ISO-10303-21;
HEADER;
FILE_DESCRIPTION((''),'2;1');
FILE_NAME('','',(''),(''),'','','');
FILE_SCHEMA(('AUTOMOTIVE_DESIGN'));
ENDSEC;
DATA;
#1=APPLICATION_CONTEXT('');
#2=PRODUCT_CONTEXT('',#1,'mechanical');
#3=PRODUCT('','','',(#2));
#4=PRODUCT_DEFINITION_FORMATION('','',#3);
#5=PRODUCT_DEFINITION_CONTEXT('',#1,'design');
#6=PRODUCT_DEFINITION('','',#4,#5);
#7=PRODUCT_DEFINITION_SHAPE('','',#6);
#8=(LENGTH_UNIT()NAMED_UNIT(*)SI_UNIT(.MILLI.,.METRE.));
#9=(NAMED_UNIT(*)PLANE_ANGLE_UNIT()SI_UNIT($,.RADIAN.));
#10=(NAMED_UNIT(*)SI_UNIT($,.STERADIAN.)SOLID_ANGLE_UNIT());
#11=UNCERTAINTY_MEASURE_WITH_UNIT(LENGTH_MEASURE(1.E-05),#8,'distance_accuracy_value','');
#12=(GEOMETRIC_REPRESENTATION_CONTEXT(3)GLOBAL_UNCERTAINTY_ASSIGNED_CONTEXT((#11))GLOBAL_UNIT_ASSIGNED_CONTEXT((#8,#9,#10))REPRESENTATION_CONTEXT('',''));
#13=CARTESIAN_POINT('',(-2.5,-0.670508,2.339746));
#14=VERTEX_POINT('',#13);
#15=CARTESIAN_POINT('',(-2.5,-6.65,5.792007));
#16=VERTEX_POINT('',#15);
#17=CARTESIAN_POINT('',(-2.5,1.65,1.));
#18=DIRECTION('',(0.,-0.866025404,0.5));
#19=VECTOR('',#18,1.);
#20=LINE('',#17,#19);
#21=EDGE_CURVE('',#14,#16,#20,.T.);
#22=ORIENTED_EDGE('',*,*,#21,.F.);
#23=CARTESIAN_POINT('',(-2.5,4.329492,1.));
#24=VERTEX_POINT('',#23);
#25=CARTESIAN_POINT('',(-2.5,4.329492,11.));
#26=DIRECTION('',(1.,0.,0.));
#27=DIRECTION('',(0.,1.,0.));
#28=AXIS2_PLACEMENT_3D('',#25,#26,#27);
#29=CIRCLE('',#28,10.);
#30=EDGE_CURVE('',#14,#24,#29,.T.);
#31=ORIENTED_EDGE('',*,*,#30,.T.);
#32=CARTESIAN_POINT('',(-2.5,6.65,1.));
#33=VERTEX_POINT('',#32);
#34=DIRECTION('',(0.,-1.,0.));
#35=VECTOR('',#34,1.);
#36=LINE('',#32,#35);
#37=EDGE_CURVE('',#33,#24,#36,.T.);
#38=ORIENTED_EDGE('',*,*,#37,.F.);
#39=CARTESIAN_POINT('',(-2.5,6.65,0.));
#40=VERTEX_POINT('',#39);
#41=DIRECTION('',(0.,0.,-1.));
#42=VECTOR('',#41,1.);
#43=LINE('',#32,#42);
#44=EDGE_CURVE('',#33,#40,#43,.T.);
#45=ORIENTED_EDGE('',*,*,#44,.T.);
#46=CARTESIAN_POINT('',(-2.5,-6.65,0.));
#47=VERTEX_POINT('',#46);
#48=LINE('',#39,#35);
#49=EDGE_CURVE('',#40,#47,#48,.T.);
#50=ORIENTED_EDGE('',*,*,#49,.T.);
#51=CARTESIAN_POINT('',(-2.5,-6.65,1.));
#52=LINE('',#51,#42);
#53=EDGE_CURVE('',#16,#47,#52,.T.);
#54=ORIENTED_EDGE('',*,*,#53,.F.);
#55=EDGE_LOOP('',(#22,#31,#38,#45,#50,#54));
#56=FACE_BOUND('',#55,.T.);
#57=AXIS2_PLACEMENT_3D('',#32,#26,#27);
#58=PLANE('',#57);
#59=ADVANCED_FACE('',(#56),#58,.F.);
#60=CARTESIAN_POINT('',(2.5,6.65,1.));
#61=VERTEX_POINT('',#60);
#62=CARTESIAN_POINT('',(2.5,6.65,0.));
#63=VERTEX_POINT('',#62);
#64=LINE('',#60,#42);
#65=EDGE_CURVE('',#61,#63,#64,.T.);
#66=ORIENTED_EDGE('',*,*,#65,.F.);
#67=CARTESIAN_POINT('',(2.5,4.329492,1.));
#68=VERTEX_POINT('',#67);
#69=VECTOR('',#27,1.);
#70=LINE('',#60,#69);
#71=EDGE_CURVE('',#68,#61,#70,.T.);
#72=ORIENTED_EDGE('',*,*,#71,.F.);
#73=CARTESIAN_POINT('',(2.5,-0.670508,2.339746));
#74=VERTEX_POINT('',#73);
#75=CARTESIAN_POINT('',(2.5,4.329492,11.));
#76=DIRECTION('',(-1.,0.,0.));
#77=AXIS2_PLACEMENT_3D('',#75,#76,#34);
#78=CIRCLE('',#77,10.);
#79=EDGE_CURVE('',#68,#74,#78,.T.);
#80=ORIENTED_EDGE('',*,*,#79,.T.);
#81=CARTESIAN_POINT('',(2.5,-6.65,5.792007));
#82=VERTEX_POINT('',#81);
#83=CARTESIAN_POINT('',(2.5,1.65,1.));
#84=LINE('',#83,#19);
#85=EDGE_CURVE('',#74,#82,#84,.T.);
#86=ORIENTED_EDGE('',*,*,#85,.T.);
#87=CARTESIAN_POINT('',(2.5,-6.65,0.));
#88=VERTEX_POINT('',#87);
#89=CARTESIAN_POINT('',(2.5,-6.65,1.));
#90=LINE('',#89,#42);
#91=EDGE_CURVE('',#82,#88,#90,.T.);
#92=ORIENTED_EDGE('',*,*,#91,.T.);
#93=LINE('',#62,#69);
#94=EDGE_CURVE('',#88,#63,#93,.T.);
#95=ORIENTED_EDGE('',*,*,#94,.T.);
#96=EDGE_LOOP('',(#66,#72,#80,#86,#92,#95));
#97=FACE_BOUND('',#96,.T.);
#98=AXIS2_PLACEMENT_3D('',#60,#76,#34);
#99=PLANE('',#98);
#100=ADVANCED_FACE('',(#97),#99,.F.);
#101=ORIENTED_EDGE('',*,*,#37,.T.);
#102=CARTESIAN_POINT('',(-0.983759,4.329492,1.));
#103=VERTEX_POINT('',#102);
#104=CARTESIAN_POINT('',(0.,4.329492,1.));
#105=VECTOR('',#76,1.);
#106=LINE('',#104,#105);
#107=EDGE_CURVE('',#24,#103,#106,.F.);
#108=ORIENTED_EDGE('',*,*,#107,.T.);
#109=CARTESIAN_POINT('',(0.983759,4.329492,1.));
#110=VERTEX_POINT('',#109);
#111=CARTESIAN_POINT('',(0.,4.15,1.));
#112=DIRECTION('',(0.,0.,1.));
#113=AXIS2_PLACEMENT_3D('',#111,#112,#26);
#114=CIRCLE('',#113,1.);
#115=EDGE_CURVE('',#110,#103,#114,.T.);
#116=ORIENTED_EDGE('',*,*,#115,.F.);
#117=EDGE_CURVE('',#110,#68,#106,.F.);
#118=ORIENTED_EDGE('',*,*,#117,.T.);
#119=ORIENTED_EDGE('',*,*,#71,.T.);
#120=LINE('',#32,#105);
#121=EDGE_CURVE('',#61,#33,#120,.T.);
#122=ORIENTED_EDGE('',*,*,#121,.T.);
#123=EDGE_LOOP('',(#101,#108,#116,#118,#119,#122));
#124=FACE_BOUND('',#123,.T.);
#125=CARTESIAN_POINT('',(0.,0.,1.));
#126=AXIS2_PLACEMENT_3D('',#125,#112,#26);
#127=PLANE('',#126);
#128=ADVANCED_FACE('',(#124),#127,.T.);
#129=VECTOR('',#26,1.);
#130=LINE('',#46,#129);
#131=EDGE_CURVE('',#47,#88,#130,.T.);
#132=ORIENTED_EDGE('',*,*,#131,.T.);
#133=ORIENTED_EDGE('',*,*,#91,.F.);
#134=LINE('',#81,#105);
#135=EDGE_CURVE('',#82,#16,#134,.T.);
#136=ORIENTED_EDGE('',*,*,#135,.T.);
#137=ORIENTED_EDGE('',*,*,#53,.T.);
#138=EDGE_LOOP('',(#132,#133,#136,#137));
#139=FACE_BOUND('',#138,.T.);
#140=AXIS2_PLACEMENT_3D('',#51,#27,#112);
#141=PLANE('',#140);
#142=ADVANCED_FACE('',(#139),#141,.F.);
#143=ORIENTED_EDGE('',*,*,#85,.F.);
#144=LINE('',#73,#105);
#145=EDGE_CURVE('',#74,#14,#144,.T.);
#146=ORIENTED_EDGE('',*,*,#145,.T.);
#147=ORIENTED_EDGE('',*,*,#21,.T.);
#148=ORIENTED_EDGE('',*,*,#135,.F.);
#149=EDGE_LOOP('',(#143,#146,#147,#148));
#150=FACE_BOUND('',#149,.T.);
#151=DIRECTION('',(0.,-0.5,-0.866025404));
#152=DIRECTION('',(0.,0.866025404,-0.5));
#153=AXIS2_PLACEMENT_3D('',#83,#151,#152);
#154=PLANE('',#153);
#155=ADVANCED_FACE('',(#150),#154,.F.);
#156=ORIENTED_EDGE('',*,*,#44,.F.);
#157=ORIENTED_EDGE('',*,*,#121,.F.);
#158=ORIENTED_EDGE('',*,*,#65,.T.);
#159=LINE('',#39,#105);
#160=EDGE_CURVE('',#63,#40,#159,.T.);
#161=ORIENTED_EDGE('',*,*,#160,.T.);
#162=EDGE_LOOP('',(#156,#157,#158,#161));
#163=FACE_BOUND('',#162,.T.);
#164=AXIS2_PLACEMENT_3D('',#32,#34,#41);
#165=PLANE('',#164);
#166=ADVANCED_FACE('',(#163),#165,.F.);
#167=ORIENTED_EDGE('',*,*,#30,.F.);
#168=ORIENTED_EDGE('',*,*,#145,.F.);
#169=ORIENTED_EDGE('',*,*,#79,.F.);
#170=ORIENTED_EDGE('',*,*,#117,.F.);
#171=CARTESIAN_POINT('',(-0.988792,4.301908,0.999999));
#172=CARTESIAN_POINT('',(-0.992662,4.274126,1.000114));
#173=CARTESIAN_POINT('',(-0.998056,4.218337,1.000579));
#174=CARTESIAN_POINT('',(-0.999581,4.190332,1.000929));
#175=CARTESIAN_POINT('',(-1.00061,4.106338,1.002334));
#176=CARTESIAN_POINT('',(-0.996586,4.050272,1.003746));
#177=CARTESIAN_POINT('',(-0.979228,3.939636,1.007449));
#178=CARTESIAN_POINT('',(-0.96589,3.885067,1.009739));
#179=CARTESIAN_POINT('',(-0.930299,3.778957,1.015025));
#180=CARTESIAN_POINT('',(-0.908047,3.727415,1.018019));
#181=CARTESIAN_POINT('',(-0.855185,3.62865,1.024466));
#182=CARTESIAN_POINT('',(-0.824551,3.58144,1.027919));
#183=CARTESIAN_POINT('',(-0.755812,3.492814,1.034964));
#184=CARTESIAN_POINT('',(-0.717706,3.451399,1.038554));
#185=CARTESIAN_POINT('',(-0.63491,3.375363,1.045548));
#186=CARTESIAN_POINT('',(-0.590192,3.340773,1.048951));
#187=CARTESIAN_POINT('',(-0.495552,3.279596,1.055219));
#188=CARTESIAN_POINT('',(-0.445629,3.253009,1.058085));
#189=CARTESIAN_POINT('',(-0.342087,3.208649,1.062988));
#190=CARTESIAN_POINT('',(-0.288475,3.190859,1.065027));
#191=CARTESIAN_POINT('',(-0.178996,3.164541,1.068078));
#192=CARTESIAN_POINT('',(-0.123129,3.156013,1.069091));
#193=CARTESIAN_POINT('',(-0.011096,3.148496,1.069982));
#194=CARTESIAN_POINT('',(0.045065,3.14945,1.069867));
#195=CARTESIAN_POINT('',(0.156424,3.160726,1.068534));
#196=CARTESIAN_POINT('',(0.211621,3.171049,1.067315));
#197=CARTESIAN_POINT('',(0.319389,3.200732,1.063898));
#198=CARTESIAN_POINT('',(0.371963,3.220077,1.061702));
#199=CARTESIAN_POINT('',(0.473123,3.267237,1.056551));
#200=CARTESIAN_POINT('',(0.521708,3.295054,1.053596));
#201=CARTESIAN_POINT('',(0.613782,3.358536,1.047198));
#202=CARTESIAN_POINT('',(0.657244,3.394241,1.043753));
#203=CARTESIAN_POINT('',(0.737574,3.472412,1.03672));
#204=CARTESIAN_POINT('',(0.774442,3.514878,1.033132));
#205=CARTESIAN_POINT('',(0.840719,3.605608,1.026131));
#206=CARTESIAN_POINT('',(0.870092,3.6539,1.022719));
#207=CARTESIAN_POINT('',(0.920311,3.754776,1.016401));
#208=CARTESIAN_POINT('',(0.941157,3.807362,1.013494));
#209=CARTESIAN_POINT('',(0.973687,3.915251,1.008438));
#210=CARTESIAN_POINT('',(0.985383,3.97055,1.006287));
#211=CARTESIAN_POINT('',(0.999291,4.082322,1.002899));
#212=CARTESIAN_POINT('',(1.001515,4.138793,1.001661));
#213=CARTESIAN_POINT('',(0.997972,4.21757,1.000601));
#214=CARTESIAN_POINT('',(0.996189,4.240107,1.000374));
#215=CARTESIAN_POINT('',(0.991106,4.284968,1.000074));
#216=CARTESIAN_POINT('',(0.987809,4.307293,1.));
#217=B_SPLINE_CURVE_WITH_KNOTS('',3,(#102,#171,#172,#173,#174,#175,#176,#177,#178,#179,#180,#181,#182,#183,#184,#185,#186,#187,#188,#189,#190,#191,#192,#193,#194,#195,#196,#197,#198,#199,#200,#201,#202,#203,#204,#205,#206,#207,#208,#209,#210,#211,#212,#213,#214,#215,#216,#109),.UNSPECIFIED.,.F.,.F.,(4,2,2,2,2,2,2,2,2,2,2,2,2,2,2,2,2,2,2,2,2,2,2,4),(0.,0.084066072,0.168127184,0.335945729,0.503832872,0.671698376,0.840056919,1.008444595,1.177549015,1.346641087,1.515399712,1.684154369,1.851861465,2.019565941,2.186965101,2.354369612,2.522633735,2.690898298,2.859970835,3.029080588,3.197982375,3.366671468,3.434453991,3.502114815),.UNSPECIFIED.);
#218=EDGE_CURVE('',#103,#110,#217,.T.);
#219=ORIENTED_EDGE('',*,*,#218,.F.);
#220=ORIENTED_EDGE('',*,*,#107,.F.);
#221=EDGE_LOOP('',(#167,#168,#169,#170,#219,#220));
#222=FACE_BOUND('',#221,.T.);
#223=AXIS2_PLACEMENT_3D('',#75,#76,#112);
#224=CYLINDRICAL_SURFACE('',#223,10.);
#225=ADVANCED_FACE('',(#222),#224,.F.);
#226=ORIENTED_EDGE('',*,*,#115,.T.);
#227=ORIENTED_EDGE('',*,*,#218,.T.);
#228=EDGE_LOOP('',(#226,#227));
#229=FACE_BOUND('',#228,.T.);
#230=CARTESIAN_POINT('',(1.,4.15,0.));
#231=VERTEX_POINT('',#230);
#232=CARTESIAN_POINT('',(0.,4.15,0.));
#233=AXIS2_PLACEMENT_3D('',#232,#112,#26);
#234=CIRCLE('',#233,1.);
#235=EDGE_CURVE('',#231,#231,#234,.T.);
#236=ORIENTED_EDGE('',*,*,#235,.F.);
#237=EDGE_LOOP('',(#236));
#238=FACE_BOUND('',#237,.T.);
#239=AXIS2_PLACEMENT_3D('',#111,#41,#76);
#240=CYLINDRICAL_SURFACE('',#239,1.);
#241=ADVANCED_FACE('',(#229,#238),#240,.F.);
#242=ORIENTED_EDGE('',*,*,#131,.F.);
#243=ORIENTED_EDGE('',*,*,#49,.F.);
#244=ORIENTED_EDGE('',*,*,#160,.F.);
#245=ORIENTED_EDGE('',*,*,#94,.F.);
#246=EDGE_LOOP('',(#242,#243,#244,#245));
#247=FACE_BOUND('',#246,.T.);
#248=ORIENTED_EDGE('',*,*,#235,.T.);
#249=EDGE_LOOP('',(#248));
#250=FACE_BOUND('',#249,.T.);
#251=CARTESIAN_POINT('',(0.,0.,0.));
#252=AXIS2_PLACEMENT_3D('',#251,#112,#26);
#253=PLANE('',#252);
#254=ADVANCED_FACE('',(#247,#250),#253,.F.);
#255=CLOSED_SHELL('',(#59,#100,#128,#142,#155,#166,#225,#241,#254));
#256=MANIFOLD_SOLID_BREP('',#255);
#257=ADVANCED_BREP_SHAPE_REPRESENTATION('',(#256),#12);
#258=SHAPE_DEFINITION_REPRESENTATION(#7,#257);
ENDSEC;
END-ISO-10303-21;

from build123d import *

# Parameters (mm, degrees)
SKETCH_1_W      = 5
SKETCH_1_H      = 13.3
SKETCH_1_R      = 1
EXTRUDE_1_DEPTH = 1
EXTRUDE_3_DEPTH = 2.5
FILLET_1_R      = 10


with BuildPart() as part:
    # 草图1 → 凸台-拉伸1 (new body)
    with BuildSketch(Plane.XY):
        Rectangle(SKETCH_1_W, SKETCH_1_H)
        with Locations((0, 4.15)):
            Circle(SKETCH_1_R, mode=Mode.SUBTRACT)
    extrude(amount=EXTRUDE_1_DEPTH)

    # 草图2 → 凸台-拉伸3 (add, symmetric)
    with BuildSketch(Plane(origin=(0, 0, 0), x_dir=(0, 0, -1), z_dir=(1, 0, 0))):
        Polygon((-1, 1.65), (-5.792007234, -6.65), (-1, -6.65), align=None)
    extrude(amount=EXTRUDE_3_DEPTH, both=True)

    # 圆角1
    # the kernel refuses this fillet: 10 mm, written as the material it adds along each edge
    with BuildSketch(Plane(origin=(2.5, 1.65, 1), x_dir=(0, 1, 0), z_dir=(-1, 0, 0))) as fillet_1_piece_1_section:
        with BuildLine():
            CenterArc((FILLET_1_R * 0.267949192431, -FILLET_1_R), FILLET_1_R, 90, 30)
            Line((-FILLET_1_R * 0.232050807569, -FILLET_1_R * 0.133974596216), (0, 0))
            Line((0, 0), (FILLET_1_R * 0.267949192431, 0))
        make_face()
    fillet_1_piece_1 = extrude(amount=5, mode=Mode.PRIVATE)
    fillet_1_piece_1 = fillet_1_piece_1 - Plane(origin=(0, 4.15, 1.267699118), x_dir=(1, 0, 0), z_dir=(0, 0, -1)) * Cylinder(1, 21, mode=Mode.PRIVATE)
    add(fillet_1_piece_1)


solid = part.part
